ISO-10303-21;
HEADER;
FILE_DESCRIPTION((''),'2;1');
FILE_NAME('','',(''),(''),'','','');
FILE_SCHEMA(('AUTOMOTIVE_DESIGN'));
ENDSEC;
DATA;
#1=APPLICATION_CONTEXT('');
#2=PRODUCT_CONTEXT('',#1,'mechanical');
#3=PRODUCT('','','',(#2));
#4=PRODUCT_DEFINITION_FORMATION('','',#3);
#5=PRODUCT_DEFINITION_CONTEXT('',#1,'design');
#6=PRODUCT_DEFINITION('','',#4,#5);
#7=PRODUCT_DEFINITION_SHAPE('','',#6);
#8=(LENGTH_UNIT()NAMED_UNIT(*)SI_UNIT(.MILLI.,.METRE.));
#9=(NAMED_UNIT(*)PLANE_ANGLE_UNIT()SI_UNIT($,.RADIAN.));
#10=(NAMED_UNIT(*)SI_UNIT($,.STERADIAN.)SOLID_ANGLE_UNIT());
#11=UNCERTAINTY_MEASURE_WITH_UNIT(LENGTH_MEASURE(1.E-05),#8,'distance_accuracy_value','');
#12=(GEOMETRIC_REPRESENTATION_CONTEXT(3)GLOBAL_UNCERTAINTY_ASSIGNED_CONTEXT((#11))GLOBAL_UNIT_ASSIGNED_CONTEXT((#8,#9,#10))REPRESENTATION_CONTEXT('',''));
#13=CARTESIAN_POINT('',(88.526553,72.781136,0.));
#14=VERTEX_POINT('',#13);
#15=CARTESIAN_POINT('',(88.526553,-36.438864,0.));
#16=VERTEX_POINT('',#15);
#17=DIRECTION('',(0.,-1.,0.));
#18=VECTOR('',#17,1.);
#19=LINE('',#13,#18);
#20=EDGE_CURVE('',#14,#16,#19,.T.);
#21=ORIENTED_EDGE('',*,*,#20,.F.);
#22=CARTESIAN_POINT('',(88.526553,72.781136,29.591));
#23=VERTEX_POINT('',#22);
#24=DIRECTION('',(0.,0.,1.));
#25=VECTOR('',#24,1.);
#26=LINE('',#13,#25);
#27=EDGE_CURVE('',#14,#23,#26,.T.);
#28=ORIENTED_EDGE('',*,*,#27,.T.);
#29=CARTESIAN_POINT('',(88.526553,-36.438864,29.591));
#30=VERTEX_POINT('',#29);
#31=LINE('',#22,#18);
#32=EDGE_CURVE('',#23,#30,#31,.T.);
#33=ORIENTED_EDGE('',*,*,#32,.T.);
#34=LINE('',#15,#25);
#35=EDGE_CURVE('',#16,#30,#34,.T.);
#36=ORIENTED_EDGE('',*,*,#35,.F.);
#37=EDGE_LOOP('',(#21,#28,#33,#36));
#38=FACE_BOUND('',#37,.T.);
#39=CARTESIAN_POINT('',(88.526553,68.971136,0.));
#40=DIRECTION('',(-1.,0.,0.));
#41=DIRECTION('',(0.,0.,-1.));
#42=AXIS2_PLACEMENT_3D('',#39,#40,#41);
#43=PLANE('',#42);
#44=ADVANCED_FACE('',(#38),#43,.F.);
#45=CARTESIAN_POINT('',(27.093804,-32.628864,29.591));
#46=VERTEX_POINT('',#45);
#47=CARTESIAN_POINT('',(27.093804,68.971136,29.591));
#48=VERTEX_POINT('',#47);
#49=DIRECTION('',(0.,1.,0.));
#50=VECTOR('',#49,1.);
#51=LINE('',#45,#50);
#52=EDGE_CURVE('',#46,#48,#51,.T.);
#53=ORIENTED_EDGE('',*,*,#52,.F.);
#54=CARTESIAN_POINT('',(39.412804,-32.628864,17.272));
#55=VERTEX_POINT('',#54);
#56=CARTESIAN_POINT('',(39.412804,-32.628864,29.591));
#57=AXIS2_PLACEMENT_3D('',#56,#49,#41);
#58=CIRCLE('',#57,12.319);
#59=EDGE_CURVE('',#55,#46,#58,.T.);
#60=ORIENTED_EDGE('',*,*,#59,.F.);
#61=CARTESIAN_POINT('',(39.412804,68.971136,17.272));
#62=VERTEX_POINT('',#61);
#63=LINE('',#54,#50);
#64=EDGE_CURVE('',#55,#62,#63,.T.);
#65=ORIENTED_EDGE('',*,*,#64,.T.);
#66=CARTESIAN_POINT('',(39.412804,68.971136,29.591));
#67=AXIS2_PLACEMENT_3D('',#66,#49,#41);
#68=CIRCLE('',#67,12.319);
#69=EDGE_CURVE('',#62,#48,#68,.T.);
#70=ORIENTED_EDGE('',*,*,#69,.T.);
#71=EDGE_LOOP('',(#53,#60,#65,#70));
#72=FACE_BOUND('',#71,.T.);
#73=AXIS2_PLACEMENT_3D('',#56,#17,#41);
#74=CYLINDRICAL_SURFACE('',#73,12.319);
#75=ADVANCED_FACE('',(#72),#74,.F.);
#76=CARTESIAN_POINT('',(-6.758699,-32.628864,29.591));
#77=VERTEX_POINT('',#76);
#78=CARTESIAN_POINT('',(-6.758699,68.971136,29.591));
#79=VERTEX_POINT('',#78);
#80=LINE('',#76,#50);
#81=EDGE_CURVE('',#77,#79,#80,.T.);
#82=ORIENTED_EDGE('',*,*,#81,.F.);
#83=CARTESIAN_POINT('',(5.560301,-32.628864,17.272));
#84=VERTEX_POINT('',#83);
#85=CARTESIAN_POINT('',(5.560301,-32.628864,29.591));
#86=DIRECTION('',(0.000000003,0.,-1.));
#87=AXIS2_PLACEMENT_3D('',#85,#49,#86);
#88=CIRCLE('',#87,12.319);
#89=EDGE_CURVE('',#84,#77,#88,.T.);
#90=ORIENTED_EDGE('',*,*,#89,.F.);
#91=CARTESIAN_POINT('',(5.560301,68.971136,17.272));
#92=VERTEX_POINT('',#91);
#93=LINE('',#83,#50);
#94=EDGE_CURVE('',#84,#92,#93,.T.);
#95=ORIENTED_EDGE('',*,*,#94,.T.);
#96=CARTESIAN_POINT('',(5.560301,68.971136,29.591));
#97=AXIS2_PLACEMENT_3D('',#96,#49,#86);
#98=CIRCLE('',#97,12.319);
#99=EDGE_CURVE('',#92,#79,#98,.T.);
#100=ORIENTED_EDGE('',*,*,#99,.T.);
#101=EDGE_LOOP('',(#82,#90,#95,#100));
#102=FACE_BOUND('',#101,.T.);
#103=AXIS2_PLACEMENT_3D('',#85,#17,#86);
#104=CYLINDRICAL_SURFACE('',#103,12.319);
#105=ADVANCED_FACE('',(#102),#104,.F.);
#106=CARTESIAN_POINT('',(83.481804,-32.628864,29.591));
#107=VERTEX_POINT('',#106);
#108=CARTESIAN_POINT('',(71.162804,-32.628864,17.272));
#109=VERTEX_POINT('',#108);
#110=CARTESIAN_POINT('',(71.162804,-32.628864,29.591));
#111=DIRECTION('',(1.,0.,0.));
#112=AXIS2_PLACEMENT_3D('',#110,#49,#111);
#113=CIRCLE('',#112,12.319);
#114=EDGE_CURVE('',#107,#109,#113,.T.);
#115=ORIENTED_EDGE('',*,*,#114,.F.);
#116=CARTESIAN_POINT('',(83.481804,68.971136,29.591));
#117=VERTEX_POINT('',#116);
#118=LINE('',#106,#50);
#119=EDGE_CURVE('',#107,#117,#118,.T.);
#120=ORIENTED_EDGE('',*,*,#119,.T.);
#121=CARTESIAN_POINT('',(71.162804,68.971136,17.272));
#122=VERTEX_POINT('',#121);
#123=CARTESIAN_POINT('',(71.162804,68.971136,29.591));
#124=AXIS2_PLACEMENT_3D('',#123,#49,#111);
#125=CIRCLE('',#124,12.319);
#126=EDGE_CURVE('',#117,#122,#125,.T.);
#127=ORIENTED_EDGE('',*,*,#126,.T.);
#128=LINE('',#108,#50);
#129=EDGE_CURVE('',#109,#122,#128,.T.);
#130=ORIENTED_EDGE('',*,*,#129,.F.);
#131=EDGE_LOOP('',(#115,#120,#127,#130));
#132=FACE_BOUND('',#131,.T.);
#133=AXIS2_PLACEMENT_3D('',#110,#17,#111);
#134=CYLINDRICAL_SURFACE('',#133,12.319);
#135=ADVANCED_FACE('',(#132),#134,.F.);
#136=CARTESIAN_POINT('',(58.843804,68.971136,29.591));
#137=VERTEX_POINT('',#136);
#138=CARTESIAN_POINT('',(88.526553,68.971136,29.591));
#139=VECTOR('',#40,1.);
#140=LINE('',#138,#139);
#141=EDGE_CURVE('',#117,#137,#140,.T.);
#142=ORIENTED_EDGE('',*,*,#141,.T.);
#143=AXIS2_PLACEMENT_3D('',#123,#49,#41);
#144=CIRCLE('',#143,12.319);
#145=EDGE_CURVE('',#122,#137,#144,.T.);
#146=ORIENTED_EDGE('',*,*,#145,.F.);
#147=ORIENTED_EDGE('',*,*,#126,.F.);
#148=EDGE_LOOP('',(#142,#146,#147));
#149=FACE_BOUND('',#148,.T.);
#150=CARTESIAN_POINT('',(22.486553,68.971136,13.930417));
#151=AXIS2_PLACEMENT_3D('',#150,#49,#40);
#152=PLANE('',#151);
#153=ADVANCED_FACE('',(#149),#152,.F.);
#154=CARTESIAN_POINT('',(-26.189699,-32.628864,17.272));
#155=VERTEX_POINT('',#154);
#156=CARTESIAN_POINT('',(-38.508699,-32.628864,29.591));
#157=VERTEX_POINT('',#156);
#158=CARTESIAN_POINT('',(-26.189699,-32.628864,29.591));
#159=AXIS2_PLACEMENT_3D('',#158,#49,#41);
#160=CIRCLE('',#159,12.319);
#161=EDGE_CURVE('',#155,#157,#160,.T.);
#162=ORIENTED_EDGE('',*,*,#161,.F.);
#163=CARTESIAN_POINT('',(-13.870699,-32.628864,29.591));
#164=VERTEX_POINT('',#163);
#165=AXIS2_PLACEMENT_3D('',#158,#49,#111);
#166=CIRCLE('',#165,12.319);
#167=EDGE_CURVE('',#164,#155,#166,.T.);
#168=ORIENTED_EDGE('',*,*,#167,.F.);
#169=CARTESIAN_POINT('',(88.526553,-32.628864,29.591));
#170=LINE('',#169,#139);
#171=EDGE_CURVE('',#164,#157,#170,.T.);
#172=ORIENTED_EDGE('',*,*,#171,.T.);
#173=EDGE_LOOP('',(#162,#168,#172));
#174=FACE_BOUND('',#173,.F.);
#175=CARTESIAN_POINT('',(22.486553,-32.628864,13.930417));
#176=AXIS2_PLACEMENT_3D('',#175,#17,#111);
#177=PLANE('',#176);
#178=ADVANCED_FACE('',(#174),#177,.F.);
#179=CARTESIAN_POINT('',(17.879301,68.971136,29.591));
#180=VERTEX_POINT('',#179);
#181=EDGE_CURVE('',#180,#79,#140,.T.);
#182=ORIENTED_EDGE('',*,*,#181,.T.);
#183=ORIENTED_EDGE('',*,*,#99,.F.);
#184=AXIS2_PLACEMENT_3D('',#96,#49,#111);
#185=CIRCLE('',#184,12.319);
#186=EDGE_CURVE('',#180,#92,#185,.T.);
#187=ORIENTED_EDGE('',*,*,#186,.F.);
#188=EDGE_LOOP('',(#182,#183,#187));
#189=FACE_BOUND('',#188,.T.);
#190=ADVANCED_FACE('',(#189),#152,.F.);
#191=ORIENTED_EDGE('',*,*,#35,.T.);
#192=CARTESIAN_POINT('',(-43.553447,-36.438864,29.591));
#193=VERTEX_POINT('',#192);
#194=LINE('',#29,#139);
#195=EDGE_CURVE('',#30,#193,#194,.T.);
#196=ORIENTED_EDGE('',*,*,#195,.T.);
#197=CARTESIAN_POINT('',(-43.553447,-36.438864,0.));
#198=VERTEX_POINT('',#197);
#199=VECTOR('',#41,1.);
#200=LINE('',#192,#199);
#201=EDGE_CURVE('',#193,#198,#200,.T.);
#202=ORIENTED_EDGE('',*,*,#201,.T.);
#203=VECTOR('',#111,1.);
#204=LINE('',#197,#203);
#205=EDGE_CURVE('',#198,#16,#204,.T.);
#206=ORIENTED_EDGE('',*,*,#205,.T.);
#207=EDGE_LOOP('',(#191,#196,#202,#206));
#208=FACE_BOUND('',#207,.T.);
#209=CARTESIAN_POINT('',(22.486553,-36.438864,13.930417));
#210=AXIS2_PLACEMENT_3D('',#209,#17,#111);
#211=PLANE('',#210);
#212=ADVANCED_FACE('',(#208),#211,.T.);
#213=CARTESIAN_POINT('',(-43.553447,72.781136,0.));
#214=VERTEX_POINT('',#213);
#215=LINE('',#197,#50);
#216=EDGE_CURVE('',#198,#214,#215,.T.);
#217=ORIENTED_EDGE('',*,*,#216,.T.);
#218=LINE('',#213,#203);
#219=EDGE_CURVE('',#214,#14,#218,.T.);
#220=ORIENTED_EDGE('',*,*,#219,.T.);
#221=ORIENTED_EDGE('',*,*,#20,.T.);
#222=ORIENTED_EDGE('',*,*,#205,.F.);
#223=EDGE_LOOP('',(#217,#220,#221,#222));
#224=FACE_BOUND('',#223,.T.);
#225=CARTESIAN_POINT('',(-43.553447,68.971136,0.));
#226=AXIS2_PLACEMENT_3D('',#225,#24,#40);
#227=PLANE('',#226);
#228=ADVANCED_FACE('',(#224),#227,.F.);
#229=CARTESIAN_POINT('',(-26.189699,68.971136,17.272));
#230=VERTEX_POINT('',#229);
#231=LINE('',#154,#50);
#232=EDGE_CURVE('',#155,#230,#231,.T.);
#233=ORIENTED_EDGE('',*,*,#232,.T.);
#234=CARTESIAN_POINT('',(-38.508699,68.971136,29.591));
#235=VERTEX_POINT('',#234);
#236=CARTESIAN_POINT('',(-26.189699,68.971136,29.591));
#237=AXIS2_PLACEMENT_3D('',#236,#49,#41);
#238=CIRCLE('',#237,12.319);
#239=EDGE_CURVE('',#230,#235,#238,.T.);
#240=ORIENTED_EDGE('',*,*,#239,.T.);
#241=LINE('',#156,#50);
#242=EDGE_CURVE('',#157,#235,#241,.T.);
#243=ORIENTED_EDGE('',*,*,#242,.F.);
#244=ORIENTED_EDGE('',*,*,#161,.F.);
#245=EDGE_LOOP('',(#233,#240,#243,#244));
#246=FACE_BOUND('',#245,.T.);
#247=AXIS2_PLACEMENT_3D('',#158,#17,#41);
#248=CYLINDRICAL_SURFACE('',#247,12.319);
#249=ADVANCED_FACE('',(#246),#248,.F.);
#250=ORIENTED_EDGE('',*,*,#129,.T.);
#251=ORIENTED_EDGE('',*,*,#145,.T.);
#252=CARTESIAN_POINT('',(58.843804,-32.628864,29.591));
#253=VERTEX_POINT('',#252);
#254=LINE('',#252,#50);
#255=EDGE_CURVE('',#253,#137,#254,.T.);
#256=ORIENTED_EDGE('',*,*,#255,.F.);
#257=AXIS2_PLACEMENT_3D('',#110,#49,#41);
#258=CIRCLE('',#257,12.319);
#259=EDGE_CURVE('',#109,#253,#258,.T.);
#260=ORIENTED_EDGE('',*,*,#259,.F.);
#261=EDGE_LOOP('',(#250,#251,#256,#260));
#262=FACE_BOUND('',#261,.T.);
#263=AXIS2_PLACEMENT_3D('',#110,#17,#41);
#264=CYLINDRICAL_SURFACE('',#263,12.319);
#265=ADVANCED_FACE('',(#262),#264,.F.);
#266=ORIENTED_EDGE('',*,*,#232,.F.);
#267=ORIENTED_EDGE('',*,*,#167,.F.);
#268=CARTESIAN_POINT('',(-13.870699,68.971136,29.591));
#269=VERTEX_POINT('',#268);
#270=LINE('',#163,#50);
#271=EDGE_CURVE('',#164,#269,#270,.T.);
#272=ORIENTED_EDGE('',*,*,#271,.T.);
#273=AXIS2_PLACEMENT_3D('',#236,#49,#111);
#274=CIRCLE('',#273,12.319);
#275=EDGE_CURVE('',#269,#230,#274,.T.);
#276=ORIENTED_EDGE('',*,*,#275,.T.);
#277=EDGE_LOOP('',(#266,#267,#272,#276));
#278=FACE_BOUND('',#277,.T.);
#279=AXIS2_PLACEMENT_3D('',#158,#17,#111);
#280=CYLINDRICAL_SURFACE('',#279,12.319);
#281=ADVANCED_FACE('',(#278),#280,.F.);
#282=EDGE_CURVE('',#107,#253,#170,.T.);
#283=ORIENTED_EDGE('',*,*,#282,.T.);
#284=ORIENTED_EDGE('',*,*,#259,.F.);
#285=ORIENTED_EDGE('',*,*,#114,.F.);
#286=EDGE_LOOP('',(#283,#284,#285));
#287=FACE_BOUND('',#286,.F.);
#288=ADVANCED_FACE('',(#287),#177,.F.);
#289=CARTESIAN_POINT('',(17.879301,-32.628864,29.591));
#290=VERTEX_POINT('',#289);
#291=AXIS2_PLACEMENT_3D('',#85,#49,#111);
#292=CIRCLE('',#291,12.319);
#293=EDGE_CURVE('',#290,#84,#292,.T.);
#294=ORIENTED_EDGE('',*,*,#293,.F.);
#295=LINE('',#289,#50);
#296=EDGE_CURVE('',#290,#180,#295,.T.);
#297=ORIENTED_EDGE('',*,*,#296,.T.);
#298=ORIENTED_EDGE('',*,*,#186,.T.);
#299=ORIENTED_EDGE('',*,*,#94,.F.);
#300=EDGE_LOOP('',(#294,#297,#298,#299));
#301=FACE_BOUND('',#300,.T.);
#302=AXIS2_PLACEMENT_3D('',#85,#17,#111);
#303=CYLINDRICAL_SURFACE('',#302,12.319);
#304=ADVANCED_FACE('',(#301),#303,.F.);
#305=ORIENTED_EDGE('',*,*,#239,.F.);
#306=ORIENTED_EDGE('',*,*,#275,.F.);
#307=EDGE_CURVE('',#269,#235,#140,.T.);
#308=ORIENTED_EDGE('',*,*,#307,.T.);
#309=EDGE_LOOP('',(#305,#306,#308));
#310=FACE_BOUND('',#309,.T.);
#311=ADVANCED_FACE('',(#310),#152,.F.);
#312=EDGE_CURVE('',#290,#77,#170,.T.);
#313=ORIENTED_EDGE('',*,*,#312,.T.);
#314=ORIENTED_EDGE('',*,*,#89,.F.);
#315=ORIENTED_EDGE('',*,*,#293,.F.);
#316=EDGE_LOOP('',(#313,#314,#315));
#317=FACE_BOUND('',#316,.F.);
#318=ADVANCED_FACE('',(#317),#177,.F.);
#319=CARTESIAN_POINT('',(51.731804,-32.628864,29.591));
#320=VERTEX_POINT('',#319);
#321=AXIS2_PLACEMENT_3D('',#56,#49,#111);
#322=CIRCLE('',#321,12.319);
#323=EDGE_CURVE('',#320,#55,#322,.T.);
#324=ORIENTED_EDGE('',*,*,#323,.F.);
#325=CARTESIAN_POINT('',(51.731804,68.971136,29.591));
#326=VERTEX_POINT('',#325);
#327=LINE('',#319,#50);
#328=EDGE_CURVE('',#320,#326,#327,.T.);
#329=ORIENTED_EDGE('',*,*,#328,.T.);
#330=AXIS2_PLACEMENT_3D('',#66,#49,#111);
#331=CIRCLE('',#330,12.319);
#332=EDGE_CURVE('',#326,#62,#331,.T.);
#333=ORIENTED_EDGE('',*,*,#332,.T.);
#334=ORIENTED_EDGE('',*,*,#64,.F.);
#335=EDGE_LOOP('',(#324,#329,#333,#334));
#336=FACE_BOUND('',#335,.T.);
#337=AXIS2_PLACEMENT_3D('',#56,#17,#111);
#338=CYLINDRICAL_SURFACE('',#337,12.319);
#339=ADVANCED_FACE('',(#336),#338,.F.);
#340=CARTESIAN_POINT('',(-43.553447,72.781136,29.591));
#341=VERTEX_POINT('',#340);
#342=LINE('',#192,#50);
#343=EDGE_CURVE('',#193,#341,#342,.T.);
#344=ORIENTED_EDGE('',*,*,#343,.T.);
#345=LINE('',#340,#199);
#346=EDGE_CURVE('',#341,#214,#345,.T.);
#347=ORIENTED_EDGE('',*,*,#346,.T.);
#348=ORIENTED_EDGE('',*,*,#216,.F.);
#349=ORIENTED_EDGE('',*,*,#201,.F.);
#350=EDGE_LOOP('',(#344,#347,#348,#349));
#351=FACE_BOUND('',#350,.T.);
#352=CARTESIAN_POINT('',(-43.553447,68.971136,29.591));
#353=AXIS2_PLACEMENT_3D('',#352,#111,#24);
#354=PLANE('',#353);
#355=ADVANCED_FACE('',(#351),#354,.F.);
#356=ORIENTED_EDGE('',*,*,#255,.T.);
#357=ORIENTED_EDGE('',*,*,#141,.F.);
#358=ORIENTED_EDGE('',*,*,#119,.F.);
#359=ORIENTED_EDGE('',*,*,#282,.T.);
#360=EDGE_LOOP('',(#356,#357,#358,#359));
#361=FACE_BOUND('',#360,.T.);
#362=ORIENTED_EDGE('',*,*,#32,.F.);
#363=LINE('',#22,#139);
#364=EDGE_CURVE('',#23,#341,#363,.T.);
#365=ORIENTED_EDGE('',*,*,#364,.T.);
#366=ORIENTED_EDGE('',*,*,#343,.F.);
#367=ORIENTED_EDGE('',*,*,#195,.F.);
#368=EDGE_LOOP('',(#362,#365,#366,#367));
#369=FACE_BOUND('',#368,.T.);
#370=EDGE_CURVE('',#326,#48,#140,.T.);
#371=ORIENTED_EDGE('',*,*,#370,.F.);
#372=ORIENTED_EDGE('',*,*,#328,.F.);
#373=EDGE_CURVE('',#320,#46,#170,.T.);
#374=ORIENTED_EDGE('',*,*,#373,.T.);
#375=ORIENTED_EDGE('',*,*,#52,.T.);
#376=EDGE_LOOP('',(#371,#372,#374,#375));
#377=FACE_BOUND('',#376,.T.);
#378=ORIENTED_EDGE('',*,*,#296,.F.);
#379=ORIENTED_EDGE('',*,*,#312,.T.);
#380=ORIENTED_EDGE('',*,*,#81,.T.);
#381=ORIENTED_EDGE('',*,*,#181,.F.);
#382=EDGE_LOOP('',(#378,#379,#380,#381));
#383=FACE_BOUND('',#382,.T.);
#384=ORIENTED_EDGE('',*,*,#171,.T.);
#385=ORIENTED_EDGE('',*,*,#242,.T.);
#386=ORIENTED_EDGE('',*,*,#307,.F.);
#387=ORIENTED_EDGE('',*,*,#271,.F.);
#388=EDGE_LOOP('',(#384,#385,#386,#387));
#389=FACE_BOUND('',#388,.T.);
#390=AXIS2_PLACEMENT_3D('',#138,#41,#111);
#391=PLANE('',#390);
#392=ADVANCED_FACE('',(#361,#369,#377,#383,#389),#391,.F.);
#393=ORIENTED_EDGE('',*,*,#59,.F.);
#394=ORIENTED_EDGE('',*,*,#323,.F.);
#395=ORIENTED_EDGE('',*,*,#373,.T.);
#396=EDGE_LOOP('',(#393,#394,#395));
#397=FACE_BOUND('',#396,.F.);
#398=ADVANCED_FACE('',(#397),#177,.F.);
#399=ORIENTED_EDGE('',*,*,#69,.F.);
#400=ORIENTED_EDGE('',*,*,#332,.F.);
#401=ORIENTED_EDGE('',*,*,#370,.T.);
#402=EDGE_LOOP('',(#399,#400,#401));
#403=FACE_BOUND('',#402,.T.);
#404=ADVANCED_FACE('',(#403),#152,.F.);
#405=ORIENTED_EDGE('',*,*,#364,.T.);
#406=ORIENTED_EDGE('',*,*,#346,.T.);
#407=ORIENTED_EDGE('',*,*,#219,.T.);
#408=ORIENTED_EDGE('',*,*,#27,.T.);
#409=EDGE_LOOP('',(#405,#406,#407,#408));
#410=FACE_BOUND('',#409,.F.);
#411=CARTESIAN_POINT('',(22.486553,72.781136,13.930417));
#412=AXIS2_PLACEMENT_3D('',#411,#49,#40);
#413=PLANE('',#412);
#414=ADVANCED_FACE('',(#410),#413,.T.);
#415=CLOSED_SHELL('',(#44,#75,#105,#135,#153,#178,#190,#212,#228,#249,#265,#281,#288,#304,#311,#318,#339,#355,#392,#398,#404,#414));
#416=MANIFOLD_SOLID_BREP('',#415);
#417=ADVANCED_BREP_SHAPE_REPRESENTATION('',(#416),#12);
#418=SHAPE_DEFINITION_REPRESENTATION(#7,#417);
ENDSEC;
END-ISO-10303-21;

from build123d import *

# Parameters (mm, degrees)
F0_W     = 132.08
F0_H     = 101.6
F1_DEPTH = 17.272
F3_DEPTH = 101.6
F6_DEPTH = 3.81


with BuildPart() as f1:
    # F0 (on Top) → F1 (new body)
    with BuildSketch(Plane.XY):
        with Locations((22.4865525961, 18.1711361257)):
            Rectangle(F0_W, F0_H)
    extrude(amount=F1_DEPTH)

    # F2 (on face) → F3 (join, through all)
    with BuildSketch(Plane.XZ.offset(32.6288638743)):
        with BuildLine():
            Line((-6.7586990196, 29.591), (-13.8706990196, 29.591))
            ThreePointArc((-13.8706990196, 29.591), (-17.4788505821, 20.8801515626), (-26.1896990196, 17.272))
            Line((-26.1896990196, 17.272), (5.560301017, 17.272))
            ThreePointArc((5.560301017, 17.272), (-3.1505474441, 20.8801515496), (-6.7586990196, 29.591))
        make_face()
        with BuildLine():
            ThreePointArc((-26.1896990196, 17.272), (-34.900547457, 20.8801515626), (-38.5086990196, 29.591))
            Line((-38.5086990196, 29.591), (-43.5534474039, 29.591))
            Line((-43.5534474039, 29.591), (-43.5534474039, 17.272))
            Line((-43.5534474039, 17.272), (-26.1896990196, 17.272))
        make_face()
        with BuildLine():
            ThreePointArc((17.8793009804, 29.591), (14.2711494308, 20.8801515755), (5.560301017, 17.272))
            Line((5.560301017, 17.272), (39.4128042118, 17.272))
            ThreePointArc((39.4128042118, 17.272), (30.7019557743, 20.8801515626), (27.0938042118, 29.591))
            Line((27.0938042118, 29.591), (17.8793009804, 29.591))
        make_face()
        with BuildLine():
            ThreePointArc((51.7318042118, 29.591), (48.1236526492, 20.8801515626), (39.4128042118, 17.272))
            Line((39.4128042118, 17.272), (71.1628042118, 17.272))
            ThreePointArc((71.1628042118, 17.272), (62.4519557743, 20.8801515626), (58.8438042118, 29.591))
            Line((58.8438042118, 29.591), (51.7318042118, 29.591))
        make_face()
        with BuildLine():
            ThreePointArc((83.4818042118, 29.591), (79.8736526492, 20.8801515626), (71.1628042118, 17.272))
            Line((71.1628042118, 17.272), (88.5265525961, 17.272))
            Line((88.5265525961, 17.272), (88.5265525961, 29.591))
            Line((88.5265525961, 29.591), (83.4818042118, 29.591))
        make_face()
    extrude(amount=-F3_DEPTH)

    # F5 (on face) → F6 (join)
    with BuildSketch(Plane.XZ.offset(32.6288638743)):
        with BuildLine():
            Line((-43.5534474039, 0), (88.5265525961, 0))
            Line((88.5265525961, 0), (88.5265525961, 29.591))
            Line((88.5265525961, 29.591), (83.4818042118, 29.591))
            ThreePointArc((83.4818042118, 29.591), (71.1628042118, 17.272), (58.8438042118, 29.591))
            Line((58.8438042118, 29.591), (51.7318042118, 29.591))
            ThreePointArc((51.7318042118, 29.591), (39.4128042118, 17.272), (27.0938042118, 29.591))
            Line((27.0938042118, 29.591), (17.8793009804, 29.591))
            ThreePointArc((17.8793009804, 29.591), (5.5603009804, 17.272), (-6.7586990196, 29.591))
            Line((-6.7586990196, 29.591), (-13.8706990196, 29.591))
            ThreePointArc((-13.8706990196, 29.591), (-26.1896990196, 17.272), (-38.5086990196, 29.591))
            Line((-38.5086990196, 29.591), (-43.5534474039, 29.591))
            Line((-43.5534474039, 29.591), (-43.5534474039, 0))
        make_face()
        with BuildLine():
            ThreePointArc((58.8438042118, 29.591), (71.1628042118, 17.272), (83.4818042118, 29.591))
            Line((83.4818042118, 29.591), (58.8438042118, 29.591))
        make_face()
        with BuildLine():
            Line((-13.8706990196, 29.591), (-38.5086990196, 29.591))
            ThreePointArc((-38.5086990196, 29.591), (-26.1896990196, 17.272), (-13.8706990196, 29.591))
        make_face()
        with BuildLine():
            ThreePointArc((27.0938042118, 29.591), (39.4128042118, 17.272), (51.7318042118, 29.591))
            Line((51.7318042118, 29.591), (27.0938042118, 29.591))
        make_face()
        with BuildLine():
            Line((17.8793009804, 29.591), (-6.7586990196, 29.591))
            ThreePointArc((-6.7586990196, 29.591), (5.5603009804, 17.272), (17.8793009804, 29.591))
        make_face()
    extrude(amount=F6_DEPTH)

    # F7: F1 across plane


with BuildPart() as f1_1:
    add(f1.part)
    add(f1.part.mirror(Plane(origin=(22.4865525961, 18.1711361257, 11.7082126405), x_dir=(1, 0, 0), z_dir=(0, -1, 0))))


solid = f1_1.part
